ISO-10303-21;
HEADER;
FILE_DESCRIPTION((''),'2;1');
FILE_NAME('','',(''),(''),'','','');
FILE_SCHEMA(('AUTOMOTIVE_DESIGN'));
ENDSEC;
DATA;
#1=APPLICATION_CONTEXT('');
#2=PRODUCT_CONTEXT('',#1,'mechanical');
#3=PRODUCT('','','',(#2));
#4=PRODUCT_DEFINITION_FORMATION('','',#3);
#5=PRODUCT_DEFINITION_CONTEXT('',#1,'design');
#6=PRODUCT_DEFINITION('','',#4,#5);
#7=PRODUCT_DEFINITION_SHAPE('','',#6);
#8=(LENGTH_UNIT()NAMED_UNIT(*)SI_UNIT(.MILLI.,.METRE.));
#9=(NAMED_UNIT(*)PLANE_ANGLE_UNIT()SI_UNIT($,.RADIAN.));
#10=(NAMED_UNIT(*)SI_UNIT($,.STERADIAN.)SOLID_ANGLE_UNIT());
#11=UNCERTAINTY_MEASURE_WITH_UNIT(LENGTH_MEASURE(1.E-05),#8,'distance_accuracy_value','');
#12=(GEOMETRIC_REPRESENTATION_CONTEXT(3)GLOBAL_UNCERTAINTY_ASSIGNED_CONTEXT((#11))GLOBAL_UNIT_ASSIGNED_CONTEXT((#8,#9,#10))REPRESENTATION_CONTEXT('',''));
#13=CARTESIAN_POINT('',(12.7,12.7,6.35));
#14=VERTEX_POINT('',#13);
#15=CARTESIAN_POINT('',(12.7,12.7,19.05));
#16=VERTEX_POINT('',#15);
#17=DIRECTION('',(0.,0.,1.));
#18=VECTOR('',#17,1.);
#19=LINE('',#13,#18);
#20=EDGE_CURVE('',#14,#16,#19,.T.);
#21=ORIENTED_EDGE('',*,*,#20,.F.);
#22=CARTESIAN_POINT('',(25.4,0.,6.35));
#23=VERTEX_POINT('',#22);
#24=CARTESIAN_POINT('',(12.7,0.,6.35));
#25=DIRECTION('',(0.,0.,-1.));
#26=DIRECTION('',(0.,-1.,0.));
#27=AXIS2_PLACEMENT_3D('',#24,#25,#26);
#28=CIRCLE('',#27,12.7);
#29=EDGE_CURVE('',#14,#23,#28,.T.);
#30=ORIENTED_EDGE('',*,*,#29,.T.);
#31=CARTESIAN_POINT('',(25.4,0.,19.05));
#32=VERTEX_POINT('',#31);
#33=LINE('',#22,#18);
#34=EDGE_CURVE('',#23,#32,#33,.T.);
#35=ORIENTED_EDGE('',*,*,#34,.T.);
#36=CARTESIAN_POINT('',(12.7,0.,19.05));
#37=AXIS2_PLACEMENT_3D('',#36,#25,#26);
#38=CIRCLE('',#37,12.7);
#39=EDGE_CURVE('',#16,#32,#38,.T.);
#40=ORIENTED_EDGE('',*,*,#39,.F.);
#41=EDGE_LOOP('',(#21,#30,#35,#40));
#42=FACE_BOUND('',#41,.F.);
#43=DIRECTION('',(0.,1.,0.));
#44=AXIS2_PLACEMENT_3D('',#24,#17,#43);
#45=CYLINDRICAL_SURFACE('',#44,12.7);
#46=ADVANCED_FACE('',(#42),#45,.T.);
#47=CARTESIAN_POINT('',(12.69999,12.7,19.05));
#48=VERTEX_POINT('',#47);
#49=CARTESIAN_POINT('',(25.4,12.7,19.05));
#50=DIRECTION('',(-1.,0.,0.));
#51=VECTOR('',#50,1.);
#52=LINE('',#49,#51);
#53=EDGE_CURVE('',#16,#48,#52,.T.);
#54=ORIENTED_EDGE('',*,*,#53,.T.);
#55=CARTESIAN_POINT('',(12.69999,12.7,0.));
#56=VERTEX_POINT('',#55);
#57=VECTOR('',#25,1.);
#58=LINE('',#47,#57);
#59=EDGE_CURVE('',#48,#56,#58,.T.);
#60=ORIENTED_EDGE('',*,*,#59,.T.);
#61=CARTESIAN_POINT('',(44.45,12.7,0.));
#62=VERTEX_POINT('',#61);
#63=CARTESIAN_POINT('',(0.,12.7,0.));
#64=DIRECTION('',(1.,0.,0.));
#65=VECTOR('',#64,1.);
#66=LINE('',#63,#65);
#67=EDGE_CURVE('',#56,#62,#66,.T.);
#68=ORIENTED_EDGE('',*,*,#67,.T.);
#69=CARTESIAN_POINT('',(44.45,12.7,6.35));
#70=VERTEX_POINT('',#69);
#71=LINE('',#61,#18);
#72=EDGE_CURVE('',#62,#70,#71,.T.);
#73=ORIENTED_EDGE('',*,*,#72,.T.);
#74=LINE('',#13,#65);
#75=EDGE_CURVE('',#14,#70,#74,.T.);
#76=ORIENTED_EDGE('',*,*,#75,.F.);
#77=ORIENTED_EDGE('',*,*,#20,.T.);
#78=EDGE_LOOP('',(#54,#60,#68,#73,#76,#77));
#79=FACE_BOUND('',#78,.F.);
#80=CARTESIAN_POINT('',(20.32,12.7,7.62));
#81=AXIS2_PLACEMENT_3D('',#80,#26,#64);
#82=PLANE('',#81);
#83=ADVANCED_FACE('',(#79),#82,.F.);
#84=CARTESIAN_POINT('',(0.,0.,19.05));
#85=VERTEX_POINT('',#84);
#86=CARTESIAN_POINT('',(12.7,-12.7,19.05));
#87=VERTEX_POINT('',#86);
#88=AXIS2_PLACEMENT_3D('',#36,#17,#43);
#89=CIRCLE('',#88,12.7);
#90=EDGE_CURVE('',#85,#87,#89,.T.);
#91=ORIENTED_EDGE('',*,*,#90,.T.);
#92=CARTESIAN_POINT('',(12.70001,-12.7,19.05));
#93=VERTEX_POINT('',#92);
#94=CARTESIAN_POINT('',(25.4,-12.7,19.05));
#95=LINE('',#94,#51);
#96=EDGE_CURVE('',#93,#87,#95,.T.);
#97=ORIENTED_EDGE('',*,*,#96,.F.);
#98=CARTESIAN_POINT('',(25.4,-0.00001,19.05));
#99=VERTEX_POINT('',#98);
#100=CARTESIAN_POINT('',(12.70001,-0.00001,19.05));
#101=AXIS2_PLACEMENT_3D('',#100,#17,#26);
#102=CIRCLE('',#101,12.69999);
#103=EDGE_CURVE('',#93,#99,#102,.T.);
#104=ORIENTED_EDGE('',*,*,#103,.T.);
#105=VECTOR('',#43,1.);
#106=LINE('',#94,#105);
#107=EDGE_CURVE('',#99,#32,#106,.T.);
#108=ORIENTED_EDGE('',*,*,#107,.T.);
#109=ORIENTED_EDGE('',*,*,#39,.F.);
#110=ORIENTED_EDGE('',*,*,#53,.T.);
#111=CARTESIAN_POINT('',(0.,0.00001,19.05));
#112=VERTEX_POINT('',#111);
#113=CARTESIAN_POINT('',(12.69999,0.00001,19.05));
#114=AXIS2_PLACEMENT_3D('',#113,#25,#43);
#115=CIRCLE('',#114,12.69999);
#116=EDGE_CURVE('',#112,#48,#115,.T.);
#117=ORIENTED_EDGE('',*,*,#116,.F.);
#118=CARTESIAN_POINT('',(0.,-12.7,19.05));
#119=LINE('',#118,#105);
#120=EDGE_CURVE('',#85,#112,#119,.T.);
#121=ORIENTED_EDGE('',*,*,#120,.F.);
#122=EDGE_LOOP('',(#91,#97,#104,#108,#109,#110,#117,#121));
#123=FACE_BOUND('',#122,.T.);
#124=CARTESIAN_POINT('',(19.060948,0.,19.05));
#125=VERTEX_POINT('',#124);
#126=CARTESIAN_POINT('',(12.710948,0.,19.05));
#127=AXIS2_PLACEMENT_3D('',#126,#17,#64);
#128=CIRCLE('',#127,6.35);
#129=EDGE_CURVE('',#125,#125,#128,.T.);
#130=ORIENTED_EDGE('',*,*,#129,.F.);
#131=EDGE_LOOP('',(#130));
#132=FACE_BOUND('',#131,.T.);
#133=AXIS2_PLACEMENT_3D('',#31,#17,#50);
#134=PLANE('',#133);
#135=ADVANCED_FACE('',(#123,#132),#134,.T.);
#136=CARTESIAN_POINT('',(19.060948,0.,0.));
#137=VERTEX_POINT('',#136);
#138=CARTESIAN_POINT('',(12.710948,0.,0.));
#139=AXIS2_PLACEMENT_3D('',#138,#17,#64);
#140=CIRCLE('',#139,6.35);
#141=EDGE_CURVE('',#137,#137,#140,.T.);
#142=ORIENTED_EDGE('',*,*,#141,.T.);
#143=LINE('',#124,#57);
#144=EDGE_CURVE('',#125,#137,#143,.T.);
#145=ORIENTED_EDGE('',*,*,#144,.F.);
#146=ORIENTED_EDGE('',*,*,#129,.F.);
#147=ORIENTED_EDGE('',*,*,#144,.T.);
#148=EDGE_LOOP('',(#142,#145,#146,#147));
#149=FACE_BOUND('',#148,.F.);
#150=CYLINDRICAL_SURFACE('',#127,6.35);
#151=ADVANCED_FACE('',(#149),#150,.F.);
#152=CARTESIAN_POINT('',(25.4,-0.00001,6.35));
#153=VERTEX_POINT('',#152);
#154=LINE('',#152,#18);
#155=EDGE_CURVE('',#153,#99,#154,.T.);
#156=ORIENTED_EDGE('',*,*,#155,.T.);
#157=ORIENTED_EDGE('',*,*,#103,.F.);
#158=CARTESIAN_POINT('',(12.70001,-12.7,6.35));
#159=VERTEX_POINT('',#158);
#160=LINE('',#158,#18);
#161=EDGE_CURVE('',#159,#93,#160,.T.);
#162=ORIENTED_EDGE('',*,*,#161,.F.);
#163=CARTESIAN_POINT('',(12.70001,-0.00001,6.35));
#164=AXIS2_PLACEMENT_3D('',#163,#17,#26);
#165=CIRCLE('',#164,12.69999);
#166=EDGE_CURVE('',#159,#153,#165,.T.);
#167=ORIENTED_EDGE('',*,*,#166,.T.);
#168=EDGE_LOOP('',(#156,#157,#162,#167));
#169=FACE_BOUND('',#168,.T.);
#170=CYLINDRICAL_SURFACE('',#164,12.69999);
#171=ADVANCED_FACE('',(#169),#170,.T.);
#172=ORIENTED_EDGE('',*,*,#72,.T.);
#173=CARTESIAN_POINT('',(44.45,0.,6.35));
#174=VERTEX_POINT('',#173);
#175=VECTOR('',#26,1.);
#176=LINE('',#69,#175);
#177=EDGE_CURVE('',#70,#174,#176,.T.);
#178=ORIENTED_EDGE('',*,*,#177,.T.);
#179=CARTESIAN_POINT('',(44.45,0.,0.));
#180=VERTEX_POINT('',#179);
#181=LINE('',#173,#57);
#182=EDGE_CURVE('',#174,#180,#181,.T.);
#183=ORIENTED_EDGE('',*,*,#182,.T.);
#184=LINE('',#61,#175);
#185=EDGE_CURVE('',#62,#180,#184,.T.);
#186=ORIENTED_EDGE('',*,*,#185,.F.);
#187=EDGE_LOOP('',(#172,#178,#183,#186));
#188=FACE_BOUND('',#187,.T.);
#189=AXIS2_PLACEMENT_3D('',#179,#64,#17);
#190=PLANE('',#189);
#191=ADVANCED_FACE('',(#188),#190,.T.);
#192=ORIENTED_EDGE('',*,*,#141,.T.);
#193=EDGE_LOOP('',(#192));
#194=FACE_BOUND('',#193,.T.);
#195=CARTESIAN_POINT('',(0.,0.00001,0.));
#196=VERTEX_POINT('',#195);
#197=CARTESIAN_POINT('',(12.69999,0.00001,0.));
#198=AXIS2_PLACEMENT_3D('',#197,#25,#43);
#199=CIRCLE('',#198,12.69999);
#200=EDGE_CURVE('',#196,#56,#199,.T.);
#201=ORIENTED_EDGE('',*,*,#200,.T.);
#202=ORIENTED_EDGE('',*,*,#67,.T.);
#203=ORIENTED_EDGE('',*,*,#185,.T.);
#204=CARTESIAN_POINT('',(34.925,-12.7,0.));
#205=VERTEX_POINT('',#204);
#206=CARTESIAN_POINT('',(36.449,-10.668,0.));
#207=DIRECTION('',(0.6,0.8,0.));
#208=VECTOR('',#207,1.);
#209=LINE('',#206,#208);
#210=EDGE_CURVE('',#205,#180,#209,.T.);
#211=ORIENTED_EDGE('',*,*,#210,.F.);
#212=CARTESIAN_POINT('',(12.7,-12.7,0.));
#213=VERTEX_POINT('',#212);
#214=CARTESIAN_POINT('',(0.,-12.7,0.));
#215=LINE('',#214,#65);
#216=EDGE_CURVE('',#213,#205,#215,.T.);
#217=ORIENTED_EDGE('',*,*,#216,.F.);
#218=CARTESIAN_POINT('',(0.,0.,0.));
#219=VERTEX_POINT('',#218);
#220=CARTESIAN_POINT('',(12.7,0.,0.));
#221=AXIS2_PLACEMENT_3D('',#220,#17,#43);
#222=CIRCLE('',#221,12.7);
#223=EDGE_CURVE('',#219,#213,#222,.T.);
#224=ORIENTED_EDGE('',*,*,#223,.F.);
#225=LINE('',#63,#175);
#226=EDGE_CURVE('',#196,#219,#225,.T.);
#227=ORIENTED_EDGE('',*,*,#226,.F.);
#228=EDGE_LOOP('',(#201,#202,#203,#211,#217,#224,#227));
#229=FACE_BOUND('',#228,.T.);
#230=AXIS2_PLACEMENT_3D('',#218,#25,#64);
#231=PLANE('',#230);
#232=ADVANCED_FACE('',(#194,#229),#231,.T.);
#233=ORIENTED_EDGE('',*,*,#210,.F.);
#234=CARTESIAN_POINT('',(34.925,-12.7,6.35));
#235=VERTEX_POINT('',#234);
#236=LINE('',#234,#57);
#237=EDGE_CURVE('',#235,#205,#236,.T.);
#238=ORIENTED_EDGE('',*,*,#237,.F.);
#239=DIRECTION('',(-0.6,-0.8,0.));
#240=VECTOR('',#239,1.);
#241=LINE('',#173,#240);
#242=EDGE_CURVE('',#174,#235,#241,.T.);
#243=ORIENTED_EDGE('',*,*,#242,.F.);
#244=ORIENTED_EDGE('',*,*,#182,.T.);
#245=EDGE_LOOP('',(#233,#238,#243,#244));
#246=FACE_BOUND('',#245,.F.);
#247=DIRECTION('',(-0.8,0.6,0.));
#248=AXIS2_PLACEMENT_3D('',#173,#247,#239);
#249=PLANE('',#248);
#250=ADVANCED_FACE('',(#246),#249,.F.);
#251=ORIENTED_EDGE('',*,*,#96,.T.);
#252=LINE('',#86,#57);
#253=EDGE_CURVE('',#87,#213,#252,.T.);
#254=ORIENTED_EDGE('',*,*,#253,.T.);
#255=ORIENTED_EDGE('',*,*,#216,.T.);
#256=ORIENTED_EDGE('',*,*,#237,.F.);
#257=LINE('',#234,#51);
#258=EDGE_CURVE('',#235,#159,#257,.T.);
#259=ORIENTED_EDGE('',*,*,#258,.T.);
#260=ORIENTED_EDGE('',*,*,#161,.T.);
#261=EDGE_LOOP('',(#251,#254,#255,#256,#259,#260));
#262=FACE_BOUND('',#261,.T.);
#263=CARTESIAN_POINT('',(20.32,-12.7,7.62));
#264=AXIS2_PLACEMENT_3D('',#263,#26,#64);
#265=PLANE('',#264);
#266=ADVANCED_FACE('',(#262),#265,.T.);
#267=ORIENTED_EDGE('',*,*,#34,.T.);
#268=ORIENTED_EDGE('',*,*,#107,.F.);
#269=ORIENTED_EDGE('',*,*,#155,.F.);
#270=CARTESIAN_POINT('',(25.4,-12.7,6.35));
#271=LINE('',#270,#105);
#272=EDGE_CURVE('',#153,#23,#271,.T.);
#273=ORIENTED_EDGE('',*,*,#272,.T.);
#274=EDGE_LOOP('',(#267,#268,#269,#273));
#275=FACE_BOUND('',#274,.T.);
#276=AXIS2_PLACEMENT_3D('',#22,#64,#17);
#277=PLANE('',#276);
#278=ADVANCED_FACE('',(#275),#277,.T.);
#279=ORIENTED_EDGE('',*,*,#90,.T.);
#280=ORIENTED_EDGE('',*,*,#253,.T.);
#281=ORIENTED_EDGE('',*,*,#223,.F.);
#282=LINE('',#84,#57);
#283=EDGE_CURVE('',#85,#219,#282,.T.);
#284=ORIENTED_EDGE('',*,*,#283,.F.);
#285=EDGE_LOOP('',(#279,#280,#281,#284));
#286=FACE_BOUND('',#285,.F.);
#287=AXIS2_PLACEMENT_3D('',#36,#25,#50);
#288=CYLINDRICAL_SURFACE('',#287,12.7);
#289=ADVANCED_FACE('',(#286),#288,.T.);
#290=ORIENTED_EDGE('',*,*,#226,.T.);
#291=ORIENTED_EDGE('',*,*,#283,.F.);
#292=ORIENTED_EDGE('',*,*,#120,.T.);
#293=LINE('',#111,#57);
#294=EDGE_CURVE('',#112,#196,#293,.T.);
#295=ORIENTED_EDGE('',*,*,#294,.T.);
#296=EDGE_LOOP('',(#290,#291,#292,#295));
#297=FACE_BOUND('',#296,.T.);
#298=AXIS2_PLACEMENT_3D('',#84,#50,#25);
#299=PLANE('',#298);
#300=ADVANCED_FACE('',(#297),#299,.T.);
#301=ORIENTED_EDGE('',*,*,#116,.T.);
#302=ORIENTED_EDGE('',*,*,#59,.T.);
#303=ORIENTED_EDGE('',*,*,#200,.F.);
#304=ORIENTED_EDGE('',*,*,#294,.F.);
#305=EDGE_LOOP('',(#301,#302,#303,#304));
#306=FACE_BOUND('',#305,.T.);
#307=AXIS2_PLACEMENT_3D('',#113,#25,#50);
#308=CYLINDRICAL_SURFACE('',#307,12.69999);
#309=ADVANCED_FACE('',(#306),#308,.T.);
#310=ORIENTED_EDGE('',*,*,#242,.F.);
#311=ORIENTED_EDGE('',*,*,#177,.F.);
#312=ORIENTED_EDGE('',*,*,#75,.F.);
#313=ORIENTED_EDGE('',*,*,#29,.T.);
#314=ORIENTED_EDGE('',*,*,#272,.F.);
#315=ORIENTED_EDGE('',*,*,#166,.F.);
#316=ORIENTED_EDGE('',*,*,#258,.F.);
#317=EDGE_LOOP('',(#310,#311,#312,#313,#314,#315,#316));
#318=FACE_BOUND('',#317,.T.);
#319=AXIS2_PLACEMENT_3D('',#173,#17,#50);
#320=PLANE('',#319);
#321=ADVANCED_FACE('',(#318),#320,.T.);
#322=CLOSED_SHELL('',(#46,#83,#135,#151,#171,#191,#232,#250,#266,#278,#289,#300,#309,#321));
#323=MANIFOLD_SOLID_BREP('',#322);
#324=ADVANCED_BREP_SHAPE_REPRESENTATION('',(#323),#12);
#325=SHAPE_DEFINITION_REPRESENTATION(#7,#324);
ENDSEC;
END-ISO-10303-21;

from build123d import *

# Parameters (mm, degrees)
F1_DEPTH = 12.7
F3_DEPTH = 6.351
F4_R     = 6.35
F5_DEPTH = 19.051
F6_R     = 12.7
F7_R     = 12.69999
F8_R     = 12.69999
F9_R     = 12.7


# Not quite as in the source:
# - a fillet or chamfer is up to 0.001 mm smaller than in the source, because OpenCascade refuses the exact size


with BuildPart() as f1:
    # F0 (on Front) → F1 (new body, symmetric)
    with BuildSketch(Plane.XZ):
        Polygon((0, 19.05), (0, 0), (44.45, 0), (44.45, 6.35), (25.4, 6.35), (25.4, 19.05), align=None)
    extrude(amount=F1_DEPTH, both=True)

    # F2 (on face) → F3 (cut, through all)
    with BuildSketch(Plane.XY.offset(6.35)):
        Polygon((34.925, -12.7), (44.45, -12.7), (44.45, 0), align=None)
    extrude(amount=-F3_DEPTH, mode=Mode.SUBTRACT)

    # F4 (on face) → F5 (cut, through all)
    with BuildSketch(Plane.XY.offset(19.05)):
        with Locations((12.7109484747, 0)):
            Circle(F4_R)
    extrude(amount=-F5_DEPTH, mode=Mode.SUBTRACT)

    # F6
    f6_edges = [f1.edges().sort_by_distance(p)[0] for p in [
        (0, -12.7, 9.525),
    ]]
    fillet(f6_edges, radius=F6_R)

    # F7 (radius 12.7 in the source; OpenCascade refuses exactly that, so slightly less here)
    f7_edges = [f1.edges().sort_by_distance(p)[0] for p in [
        (0, 12.7, 9.525),
    ]]
    fillet(f7_edges, radius=F7_R)

    # F8 (radius 12.7 in the source; OpenCascade refuses exactly that, so slightly less here)
    f8_edges = [f1.edges().sort_by_distance(p)[0] for p in [
        (25.4, -12.7, 12.7),
    ]]
    fillet(f8_edges, radius=F8_R)

    # F9
    f9_edges = [f1.edges().sort_by_distance(p)[0] for p in [
        (25.4, 12.7, 12.7),
    ]]
    fillet(f9_edges, radius=F9_R)


solid = f1.part
